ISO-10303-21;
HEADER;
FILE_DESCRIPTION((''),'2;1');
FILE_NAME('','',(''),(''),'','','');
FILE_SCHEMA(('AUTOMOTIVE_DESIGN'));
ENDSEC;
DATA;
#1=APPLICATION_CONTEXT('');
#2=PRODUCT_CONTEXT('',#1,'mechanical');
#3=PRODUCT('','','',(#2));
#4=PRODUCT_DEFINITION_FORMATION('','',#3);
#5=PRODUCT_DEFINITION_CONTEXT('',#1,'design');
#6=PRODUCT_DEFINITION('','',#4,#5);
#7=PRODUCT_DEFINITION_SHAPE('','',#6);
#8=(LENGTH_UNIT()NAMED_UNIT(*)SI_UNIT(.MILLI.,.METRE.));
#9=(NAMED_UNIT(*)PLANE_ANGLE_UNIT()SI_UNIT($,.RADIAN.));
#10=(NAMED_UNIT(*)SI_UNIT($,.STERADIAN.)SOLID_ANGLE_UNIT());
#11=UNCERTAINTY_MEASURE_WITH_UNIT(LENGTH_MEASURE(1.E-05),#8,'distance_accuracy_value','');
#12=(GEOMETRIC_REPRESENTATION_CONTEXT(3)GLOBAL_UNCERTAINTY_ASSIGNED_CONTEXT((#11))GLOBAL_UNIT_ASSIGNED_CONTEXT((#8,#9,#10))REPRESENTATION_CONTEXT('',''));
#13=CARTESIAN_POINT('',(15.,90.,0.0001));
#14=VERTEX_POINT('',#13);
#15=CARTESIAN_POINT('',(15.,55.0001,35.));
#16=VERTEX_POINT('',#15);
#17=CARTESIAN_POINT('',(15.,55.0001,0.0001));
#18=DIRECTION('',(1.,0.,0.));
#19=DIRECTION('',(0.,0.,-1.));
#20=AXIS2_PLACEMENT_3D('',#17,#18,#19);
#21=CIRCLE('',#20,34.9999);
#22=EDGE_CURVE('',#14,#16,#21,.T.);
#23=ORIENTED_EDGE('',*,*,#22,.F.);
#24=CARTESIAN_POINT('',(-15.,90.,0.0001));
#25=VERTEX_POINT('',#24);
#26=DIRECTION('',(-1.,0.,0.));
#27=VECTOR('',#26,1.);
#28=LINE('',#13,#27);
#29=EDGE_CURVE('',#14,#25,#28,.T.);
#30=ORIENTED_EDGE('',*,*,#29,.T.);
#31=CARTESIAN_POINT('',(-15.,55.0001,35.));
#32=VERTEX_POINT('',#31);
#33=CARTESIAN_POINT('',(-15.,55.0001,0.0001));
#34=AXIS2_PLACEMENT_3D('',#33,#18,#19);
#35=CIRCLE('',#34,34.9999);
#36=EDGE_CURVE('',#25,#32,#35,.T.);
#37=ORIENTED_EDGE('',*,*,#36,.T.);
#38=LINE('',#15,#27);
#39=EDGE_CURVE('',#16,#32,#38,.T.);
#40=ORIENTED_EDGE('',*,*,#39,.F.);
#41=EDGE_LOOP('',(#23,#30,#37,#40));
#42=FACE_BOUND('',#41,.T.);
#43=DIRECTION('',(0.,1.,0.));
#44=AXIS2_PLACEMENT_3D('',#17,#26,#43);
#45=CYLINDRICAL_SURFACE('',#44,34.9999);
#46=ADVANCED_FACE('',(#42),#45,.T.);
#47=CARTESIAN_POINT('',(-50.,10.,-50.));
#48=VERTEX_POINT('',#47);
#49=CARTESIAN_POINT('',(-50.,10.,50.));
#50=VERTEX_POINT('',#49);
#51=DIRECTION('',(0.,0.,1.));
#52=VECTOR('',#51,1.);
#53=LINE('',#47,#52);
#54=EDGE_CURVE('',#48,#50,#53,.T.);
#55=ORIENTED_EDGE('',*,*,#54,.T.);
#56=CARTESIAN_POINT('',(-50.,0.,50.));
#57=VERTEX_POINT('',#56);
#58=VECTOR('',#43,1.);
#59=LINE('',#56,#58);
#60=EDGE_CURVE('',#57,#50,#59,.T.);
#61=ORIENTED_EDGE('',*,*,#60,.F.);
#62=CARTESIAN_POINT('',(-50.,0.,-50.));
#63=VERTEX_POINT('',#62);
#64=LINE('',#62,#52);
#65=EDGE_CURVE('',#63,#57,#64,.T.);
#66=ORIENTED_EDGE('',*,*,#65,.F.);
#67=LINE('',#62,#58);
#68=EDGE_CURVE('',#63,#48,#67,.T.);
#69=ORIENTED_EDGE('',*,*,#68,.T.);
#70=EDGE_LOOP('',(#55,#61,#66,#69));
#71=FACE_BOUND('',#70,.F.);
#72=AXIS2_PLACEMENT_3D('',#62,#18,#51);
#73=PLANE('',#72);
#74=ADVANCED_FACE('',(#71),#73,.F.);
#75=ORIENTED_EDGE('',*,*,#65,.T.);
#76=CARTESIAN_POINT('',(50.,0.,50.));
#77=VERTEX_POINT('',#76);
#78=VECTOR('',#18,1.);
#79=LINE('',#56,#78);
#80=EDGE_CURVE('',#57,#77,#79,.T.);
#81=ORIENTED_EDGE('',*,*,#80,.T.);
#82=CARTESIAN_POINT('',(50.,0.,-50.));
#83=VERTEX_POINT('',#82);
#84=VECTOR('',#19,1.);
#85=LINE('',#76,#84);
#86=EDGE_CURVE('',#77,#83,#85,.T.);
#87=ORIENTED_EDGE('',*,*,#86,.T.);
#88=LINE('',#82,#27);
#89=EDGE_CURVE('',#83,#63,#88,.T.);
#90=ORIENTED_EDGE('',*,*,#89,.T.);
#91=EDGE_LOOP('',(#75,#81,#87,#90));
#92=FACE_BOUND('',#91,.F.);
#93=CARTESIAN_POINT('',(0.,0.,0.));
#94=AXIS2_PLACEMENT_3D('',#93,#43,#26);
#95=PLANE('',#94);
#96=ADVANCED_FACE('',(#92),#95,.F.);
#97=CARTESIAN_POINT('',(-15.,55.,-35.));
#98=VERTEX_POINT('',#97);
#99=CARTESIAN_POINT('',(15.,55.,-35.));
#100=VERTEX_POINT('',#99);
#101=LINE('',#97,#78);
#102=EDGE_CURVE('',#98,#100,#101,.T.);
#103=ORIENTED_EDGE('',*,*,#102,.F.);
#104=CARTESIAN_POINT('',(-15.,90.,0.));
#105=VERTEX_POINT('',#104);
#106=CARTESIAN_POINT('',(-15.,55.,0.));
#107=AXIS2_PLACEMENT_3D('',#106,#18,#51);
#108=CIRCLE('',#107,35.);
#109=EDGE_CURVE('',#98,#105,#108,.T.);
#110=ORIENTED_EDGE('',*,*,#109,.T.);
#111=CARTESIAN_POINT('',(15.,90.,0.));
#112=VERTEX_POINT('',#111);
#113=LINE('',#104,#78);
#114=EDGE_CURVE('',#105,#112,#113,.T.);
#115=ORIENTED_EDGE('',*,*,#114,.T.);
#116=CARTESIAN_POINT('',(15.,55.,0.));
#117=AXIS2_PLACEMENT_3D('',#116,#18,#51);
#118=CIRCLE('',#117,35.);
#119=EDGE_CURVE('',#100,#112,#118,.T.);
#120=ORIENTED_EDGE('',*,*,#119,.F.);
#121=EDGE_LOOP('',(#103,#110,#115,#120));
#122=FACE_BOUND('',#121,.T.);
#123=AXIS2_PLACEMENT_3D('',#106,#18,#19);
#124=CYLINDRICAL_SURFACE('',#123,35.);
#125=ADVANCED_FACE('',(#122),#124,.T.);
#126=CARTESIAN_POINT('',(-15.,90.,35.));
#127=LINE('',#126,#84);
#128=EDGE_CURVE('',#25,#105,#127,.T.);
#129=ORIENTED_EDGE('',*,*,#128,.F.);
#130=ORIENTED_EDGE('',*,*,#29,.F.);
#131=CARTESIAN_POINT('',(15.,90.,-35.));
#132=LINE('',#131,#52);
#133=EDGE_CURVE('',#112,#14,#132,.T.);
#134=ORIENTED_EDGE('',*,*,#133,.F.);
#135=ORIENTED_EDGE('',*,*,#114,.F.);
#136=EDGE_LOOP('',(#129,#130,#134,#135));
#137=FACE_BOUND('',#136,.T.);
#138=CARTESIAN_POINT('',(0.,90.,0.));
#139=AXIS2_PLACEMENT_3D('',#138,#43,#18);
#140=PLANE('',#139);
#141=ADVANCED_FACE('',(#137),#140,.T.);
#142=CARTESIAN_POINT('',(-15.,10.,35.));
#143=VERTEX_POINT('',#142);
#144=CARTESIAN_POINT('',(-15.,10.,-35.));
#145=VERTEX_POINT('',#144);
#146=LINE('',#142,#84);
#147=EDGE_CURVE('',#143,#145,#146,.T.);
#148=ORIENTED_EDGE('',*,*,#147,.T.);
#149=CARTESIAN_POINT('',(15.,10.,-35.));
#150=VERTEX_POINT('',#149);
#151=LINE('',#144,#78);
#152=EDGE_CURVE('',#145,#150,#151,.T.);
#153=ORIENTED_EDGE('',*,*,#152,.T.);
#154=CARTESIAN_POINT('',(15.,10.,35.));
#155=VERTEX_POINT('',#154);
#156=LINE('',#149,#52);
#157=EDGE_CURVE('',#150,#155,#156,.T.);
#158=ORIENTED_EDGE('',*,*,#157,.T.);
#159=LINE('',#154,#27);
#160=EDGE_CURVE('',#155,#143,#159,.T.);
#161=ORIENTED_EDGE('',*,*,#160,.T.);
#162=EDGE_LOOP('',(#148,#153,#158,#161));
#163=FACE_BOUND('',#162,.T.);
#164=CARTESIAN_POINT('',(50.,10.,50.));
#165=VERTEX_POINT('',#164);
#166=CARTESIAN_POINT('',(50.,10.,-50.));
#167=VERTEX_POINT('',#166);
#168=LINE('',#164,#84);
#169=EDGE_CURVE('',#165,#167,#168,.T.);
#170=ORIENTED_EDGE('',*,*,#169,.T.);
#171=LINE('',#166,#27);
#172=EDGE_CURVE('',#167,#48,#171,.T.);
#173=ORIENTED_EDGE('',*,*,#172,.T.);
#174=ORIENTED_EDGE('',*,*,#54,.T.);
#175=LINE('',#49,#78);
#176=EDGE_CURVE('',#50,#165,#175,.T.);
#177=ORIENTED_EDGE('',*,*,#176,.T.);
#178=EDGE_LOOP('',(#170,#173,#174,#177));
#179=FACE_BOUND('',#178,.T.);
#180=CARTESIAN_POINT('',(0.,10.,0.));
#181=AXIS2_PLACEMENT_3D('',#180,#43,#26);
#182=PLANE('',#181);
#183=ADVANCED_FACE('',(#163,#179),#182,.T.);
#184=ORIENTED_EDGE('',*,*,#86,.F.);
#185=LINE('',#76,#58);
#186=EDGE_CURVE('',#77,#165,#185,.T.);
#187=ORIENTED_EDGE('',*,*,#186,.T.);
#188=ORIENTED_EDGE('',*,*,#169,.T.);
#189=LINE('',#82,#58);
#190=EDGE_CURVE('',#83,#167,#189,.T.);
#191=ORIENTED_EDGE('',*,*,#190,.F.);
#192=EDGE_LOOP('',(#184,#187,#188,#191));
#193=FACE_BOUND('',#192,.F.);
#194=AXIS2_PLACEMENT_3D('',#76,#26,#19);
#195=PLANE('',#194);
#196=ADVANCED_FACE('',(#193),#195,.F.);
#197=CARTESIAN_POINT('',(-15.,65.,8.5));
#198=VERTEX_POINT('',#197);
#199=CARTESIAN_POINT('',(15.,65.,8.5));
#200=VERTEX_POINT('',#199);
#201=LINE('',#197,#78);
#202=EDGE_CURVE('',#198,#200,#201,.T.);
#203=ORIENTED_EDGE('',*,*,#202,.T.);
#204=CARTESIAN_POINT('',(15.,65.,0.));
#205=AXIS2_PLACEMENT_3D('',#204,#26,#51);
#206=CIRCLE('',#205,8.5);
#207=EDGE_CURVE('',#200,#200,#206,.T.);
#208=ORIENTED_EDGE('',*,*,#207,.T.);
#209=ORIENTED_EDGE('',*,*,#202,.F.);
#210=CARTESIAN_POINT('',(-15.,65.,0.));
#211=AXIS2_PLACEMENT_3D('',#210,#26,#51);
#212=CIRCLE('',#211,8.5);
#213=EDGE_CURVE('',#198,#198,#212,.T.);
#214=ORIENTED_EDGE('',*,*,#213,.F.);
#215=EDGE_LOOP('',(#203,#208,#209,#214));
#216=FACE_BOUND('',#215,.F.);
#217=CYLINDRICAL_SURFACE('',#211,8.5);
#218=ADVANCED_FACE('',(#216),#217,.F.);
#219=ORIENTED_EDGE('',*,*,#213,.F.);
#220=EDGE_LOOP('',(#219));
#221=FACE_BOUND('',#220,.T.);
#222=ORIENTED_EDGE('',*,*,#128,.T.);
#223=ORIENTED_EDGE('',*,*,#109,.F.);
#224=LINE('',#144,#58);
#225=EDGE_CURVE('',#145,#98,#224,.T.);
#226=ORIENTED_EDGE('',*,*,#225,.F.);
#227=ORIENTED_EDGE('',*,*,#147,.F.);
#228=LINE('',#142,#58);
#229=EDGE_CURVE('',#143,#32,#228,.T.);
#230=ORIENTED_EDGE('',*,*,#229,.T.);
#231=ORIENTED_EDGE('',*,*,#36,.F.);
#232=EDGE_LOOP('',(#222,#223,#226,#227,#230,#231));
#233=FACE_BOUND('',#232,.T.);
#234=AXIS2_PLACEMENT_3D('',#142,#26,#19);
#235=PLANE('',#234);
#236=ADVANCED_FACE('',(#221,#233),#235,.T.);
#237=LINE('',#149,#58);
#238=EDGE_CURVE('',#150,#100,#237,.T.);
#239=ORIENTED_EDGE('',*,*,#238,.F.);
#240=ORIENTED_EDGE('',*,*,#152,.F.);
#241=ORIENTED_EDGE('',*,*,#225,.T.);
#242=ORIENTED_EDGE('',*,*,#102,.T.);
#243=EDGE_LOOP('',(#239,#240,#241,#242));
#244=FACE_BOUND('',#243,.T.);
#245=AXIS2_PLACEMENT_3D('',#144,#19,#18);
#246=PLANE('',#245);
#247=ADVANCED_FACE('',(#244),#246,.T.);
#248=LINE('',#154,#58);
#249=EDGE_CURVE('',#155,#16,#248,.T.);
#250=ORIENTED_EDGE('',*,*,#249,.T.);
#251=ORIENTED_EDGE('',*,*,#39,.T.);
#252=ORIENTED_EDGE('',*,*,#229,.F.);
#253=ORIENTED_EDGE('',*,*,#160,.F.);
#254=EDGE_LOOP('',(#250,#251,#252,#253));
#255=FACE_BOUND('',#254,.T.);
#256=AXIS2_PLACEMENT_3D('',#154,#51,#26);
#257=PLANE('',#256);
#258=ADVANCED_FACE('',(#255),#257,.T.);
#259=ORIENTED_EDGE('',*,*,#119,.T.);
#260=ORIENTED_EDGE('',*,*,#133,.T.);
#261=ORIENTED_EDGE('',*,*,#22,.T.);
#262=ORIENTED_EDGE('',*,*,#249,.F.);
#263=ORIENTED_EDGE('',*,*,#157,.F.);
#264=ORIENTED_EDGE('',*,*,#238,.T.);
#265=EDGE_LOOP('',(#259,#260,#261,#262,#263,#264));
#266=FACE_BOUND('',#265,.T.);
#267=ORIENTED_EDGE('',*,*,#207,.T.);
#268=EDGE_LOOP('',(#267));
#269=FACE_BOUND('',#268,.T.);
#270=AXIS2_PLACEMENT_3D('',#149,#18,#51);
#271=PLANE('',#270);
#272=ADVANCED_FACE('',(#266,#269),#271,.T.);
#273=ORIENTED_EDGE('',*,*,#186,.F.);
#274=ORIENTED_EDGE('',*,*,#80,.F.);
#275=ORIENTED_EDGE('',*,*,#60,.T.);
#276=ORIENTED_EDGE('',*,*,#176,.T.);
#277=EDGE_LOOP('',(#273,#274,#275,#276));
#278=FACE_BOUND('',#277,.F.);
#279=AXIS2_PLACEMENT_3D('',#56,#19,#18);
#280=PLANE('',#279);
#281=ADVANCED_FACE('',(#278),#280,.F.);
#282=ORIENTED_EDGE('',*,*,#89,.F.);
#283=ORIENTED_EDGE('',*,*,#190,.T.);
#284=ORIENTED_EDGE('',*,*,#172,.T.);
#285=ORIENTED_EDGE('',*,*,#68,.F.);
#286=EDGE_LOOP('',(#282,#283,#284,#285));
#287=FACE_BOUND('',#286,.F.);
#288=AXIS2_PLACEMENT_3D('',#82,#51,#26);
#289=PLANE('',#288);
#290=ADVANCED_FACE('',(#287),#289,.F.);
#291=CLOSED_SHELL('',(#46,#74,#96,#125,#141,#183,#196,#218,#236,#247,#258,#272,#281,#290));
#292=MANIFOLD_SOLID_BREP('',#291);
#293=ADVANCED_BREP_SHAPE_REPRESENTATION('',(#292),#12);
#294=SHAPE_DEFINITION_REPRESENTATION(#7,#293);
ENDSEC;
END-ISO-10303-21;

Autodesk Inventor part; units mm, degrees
ref_plane "YZ Plane" through (0, 0, 0) normal (1, 0, 0) x (0, 1, 0)
ref_plane "XZ Plane" through (0, 0, 0) normal (0, 1, 0) x (-1, 0, 0)
ref_plane "XY Plane" through (0, 0, 0) normal (0, 0, 1) x (1, 0, 0)
sketch "Boceto1" plane through (0, 0, 0) normal (0, 1, 0) x (-1, 0, 0)
  line L0 (50, 50) -> (-50, 50)
  line L1 (-50, 50) -> (-50, -50)
  line L2 (-50, -50) -> (50, -50)
  line L3 (50, -50) -> (50, 50)
  line L4 (50, 50) -> (-50, -50) construction
  line L5 (-50, 50) -> (50, -50) construction
  point P0 (0, 0)
  dimension "d0" = 100
  dimension "d1" = 100
extrude "Extrusión1" add sketch "Boceto1" along normal blind 10
sketch "Boceto2" plane through (0, 10, 0) normal (0, 1, 0) x (1, 0, 0)
  line L0 (-15, 35) -> (15, 35)
  line L1 (15, 35) -> (15, -35)
  line L2 (15, -35) -> (-15, -35)
  line L3 (-15, -35) -> (-15, 35)
  line L4 (-15, 35) -> (15, -35) construction
  line L5 (15, 35) -> (-15, -35) construction
  point P0 (0, 0)
  dimension "d4" = 70
  dimension "d5" = 30
extrude "Extrusión2" add sketch "Boceto2" along normal blind 80
sketch "Boceto3" plane through (-15, 10, -35) normal (-1, 0, 0) x (0, 0, 1)
  circle A0 centre (35, 55) radius 8.5
  line L0 (0, 0) -> (0, 80) projected
  line L1 (0, 80) -> (70, 80) projected
  point P0 (35, -10)
  dimension "d8" = 17
  dimension "d9" = 35
  dimension "d10" = 25
extrude "Extrusión3" cut sketch "Boceto3" along normal mid plane 80
fillet "Empalme1" radius 35 1 edges at (0, 90, -35)
fillet "Empalme2" radius 35 1 edges at (0, 90, 35)
properties part number "02_10 Soporte01" material "Acero ASTM A36"
